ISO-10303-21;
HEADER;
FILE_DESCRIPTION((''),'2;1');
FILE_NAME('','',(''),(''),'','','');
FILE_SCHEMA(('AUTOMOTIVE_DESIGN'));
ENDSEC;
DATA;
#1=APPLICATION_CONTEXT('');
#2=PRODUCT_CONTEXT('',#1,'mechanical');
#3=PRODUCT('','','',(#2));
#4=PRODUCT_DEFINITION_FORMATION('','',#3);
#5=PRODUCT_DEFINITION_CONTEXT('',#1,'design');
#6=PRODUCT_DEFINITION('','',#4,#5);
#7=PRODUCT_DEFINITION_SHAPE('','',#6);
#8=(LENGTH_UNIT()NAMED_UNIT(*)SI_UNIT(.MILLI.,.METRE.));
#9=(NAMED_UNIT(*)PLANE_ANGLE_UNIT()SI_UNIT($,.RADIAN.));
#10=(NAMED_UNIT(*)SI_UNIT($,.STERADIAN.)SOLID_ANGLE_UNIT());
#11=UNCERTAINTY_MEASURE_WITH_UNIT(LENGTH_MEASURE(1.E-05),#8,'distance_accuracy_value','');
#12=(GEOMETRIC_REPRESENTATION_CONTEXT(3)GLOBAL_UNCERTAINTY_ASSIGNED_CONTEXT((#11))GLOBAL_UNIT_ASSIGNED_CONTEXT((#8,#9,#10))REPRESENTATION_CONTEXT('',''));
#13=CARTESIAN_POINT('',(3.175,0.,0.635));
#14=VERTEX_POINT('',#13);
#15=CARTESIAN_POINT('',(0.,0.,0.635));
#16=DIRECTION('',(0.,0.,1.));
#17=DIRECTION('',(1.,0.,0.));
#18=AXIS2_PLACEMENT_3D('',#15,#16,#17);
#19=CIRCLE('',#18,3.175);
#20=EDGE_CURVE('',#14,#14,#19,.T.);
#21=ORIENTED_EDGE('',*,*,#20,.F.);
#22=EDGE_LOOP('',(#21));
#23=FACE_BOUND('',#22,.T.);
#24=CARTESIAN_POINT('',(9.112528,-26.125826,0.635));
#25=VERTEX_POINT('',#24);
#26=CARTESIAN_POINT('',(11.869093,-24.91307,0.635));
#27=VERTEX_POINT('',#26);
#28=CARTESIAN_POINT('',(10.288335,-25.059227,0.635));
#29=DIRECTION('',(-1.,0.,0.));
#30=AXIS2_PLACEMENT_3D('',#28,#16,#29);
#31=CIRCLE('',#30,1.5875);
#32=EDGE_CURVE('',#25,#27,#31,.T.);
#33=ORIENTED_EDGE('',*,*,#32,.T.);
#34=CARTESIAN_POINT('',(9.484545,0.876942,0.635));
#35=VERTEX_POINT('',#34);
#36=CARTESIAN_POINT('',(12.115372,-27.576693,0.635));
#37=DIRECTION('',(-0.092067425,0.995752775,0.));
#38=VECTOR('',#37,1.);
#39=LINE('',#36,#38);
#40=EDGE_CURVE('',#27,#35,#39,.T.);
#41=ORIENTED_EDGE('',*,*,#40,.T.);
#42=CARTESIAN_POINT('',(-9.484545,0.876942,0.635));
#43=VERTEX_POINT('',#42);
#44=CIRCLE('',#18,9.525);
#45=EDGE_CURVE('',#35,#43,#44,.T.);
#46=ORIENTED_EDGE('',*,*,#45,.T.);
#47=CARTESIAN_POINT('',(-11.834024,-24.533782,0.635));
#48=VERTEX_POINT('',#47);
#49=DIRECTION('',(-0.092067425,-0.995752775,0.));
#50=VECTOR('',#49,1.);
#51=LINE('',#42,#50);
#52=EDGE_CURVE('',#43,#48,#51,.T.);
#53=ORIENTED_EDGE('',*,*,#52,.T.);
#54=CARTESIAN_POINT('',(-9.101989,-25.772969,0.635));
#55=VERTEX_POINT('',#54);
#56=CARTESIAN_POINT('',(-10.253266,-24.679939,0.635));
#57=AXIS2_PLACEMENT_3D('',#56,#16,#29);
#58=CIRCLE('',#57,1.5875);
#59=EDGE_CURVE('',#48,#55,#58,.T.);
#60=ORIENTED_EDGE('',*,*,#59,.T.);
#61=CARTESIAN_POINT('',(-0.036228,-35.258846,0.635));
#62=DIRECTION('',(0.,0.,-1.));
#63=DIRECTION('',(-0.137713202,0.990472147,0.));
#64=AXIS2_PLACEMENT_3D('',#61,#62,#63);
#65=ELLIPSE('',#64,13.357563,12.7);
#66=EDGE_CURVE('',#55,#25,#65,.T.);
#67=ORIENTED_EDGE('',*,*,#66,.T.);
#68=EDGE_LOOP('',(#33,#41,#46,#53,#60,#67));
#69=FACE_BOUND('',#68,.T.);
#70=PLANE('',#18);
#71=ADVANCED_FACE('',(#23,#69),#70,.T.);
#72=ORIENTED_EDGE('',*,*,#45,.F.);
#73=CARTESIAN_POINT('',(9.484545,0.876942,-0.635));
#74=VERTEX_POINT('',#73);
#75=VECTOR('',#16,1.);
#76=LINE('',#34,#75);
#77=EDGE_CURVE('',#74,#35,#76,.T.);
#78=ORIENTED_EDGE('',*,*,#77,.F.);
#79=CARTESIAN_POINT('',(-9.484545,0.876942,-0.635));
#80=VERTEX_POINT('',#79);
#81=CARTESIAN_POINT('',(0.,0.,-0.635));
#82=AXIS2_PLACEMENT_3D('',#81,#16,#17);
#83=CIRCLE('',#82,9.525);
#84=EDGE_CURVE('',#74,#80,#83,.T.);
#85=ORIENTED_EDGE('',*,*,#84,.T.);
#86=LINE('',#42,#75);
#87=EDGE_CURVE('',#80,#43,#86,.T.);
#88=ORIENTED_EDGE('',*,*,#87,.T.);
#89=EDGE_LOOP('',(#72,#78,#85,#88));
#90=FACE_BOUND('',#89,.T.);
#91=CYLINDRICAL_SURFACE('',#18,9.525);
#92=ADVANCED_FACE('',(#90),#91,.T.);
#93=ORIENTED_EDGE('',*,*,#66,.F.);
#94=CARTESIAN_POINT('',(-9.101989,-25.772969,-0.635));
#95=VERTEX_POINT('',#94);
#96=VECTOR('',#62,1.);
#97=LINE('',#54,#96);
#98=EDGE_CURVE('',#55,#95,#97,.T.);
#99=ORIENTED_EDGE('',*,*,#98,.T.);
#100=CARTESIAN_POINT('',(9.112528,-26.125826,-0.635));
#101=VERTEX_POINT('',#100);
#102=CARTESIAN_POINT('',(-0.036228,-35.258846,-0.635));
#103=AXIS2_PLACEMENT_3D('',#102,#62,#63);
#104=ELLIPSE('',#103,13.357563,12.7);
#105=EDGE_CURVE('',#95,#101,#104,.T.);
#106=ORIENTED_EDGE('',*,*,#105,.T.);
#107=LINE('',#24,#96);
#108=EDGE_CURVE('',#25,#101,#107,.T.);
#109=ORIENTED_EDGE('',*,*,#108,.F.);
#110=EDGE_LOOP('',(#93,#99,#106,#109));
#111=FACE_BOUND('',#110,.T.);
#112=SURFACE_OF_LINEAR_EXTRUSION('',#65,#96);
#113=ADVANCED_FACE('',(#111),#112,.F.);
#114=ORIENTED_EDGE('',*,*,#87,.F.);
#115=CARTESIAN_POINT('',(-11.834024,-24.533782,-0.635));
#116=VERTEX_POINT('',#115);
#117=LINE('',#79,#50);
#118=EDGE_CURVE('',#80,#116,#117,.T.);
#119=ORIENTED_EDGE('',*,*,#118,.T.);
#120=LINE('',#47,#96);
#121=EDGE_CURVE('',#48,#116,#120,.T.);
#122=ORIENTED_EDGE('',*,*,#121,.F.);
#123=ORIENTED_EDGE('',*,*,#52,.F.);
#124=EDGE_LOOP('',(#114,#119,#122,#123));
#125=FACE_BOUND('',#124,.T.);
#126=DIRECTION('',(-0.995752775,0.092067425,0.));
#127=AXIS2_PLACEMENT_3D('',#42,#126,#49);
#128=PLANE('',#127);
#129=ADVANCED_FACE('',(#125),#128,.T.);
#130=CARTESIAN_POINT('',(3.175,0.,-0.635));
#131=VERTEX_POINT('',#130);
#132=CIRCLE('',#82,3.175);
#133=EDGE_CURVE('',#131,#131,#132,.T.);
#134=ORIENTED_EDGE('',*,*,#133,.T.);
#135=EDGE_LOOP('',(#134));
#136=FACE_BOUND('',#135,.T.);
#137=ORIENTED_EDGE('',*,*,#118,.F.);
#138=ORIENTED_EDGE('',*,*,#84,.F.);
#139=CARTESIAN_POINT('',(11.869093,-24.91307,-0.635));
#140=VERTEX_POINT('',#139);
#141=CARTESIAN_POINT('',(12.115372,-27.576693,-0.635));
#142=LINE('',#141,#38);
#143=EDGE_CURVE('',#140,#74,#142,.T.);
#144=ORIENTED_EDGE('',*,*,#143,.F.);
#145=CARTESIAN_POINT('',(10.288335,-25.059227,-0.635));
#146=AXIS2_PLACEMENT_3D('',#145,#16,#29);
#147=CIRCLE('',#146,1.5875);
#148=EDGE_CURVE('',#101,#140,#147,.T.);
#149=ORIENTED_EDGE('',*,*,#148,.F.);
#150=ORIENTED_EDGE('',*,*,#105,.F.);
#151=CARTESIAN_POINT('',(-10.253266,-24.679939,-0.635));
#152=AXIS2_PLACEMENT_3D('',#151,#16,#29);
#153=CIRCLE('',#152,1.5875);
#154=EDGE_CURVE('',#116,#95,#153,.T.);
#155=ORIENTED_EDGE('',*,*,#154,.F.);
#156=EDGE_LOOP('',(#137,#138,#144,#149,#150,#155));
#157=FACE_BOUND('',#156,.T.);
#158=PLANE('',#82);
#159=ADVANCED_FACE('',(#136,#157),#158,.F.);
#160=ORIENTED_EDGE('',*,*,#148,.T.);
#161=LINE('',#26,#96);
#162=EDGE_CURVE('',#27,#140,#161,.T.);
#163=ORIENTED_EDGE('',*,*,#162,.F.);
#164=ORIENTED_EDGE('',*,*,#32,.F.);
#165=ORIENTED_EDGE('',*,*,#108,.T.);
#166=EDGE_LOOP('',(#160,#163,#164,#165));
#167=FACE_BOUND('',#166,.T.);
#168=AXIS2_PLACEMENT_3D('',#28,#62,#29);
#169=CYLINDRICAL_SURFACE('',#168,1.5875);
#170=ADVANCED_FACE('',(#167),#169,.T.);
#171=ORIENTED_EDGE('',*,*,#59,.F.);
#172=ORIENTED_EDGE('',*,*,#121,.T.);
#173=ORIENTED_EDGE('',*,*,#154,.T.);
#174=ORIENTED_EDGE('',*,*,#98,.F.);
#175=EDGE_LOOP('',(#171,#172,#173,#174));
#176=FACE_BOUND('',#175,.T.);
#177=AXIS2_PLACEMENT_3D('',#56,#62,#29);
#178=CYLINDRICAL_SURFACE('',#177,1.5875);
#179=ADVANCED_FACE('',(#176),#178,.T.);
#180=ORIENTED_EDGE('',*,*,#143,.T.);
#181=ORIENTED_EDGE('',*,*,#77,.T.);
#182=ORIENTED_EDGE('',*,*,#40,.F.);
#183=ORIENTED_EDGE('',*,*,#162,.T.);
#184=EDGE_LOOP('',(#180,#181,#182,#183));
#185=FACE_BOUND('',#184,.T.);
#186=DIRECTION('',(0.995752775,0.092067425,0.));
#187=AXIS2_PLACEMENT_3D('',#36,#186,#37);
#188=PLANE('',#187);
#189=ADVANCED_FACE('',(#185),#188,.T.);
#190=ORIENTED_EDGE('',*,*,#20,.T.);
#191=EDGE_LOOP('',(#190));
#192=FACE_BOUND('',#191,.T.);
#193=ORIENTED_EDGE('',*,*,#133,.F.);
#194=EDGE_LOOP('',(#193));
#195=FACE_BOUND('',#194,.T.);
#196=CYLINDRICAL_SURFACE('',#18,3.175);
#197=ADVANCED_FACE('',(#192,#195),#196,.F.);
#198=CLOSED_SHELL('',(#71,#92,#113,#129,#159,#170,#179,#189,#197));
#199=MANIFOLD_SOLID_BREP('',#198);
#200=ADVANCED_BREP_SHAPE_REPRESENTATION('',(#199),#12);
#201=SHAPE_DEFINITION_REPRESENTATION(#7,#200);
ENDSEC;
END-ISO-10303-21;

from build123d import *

# Parameters (mm, degrees)
SKETCH1_R           = 3.175
BOSS_EXTRUDE1_DEPTH = 0.635
SKETCH3_R           = 12.7
CUT_EXTRUDE1_DEPTH  = 239.777071188
CUT_EXTRUDE2_DEPTH  = 2.54


with BuildPart() as part:
    # Sketch1 → Boss-Extrude1 (new, symmetric)
    with BuildSketch(Plane.XY):
        with BuildLine():
            Line((-9.484545184, 0.876942223), (-12.115371852, -27.576693328))
            Line((-12.115371852, -27.576693328), (12.115371852, -27.576693328))
            Line((12.115371852, -27.576693328), (9.484545184, 0.876942223))
            ThreePointArc((9.484545184, 0.876942223), (0, 9.525), (-9.484545184, 0.876942223))
        make_face()
        Circle(SKETCH1_R, mode=Mode.SUBTRACT)
    extrude(amount=BOSS_EXTRUDE1_DEPTH, both=True)

    # Sketch3 → Cut-Extrude1 (cut, through all)
    with BuildSketch(Plane(origin=(-10.234654006, 38.091107641, -227.844114987), x_dir=(-0.9990889360534101, -0.013334766916774946, 0.04053987971048249), z_dir=(-0.04267601884298755, 0.30693794962268295, -0.9507722400749491))):
        Circle(SKETCH3_R)
    extrude(amount=-CUT_EXTRUDE1_DEPTH, mode=Mode.SUBTRACT)

    # Sketch4 → Cut-Extrude2 (cut)
    with BuildSketch(Plane(origin=(0, 0, -0.635), x_dir=(-1, 0, 0), z_dir=(0, 0, -1))):
        with BuildLine():
            Line((-12.115371852, -27.576693328), (12.115371852, -27.576693328))
            Line((12.115371852, -27.576693328), (11.834023856, -24.533781602))
            ThreePointArc((11.834023856, -24.533781602), (10.909017726, -26.125672484), (9.101988814, -25.772969444))
            add(Edge.make_bspline(
                [(9.101988814, -25.772969444), (-0.049020897, -16.134309997), (-9.112527933, -26.125826157)],
                knots=[5.634452132, 5.634452132, 5.634452132, 7.231690845, 7.231690845, 7.231690845], degree=2, weights=[1, 0.697696458, 1]))
            ThreePointArc((-9.112527933, -26.125826157), (-10.927624329, -26.512315749), (-11.869092937, -24.913070304))
            Line((-11.869092937, -24.913070304), (-12.115371852, -27.576693328))
        make_face()
    extrude(amount=-CUT_EXTRUDE2_DEPTH, mode=Mode.SUBTRACT)


solid = part.part
